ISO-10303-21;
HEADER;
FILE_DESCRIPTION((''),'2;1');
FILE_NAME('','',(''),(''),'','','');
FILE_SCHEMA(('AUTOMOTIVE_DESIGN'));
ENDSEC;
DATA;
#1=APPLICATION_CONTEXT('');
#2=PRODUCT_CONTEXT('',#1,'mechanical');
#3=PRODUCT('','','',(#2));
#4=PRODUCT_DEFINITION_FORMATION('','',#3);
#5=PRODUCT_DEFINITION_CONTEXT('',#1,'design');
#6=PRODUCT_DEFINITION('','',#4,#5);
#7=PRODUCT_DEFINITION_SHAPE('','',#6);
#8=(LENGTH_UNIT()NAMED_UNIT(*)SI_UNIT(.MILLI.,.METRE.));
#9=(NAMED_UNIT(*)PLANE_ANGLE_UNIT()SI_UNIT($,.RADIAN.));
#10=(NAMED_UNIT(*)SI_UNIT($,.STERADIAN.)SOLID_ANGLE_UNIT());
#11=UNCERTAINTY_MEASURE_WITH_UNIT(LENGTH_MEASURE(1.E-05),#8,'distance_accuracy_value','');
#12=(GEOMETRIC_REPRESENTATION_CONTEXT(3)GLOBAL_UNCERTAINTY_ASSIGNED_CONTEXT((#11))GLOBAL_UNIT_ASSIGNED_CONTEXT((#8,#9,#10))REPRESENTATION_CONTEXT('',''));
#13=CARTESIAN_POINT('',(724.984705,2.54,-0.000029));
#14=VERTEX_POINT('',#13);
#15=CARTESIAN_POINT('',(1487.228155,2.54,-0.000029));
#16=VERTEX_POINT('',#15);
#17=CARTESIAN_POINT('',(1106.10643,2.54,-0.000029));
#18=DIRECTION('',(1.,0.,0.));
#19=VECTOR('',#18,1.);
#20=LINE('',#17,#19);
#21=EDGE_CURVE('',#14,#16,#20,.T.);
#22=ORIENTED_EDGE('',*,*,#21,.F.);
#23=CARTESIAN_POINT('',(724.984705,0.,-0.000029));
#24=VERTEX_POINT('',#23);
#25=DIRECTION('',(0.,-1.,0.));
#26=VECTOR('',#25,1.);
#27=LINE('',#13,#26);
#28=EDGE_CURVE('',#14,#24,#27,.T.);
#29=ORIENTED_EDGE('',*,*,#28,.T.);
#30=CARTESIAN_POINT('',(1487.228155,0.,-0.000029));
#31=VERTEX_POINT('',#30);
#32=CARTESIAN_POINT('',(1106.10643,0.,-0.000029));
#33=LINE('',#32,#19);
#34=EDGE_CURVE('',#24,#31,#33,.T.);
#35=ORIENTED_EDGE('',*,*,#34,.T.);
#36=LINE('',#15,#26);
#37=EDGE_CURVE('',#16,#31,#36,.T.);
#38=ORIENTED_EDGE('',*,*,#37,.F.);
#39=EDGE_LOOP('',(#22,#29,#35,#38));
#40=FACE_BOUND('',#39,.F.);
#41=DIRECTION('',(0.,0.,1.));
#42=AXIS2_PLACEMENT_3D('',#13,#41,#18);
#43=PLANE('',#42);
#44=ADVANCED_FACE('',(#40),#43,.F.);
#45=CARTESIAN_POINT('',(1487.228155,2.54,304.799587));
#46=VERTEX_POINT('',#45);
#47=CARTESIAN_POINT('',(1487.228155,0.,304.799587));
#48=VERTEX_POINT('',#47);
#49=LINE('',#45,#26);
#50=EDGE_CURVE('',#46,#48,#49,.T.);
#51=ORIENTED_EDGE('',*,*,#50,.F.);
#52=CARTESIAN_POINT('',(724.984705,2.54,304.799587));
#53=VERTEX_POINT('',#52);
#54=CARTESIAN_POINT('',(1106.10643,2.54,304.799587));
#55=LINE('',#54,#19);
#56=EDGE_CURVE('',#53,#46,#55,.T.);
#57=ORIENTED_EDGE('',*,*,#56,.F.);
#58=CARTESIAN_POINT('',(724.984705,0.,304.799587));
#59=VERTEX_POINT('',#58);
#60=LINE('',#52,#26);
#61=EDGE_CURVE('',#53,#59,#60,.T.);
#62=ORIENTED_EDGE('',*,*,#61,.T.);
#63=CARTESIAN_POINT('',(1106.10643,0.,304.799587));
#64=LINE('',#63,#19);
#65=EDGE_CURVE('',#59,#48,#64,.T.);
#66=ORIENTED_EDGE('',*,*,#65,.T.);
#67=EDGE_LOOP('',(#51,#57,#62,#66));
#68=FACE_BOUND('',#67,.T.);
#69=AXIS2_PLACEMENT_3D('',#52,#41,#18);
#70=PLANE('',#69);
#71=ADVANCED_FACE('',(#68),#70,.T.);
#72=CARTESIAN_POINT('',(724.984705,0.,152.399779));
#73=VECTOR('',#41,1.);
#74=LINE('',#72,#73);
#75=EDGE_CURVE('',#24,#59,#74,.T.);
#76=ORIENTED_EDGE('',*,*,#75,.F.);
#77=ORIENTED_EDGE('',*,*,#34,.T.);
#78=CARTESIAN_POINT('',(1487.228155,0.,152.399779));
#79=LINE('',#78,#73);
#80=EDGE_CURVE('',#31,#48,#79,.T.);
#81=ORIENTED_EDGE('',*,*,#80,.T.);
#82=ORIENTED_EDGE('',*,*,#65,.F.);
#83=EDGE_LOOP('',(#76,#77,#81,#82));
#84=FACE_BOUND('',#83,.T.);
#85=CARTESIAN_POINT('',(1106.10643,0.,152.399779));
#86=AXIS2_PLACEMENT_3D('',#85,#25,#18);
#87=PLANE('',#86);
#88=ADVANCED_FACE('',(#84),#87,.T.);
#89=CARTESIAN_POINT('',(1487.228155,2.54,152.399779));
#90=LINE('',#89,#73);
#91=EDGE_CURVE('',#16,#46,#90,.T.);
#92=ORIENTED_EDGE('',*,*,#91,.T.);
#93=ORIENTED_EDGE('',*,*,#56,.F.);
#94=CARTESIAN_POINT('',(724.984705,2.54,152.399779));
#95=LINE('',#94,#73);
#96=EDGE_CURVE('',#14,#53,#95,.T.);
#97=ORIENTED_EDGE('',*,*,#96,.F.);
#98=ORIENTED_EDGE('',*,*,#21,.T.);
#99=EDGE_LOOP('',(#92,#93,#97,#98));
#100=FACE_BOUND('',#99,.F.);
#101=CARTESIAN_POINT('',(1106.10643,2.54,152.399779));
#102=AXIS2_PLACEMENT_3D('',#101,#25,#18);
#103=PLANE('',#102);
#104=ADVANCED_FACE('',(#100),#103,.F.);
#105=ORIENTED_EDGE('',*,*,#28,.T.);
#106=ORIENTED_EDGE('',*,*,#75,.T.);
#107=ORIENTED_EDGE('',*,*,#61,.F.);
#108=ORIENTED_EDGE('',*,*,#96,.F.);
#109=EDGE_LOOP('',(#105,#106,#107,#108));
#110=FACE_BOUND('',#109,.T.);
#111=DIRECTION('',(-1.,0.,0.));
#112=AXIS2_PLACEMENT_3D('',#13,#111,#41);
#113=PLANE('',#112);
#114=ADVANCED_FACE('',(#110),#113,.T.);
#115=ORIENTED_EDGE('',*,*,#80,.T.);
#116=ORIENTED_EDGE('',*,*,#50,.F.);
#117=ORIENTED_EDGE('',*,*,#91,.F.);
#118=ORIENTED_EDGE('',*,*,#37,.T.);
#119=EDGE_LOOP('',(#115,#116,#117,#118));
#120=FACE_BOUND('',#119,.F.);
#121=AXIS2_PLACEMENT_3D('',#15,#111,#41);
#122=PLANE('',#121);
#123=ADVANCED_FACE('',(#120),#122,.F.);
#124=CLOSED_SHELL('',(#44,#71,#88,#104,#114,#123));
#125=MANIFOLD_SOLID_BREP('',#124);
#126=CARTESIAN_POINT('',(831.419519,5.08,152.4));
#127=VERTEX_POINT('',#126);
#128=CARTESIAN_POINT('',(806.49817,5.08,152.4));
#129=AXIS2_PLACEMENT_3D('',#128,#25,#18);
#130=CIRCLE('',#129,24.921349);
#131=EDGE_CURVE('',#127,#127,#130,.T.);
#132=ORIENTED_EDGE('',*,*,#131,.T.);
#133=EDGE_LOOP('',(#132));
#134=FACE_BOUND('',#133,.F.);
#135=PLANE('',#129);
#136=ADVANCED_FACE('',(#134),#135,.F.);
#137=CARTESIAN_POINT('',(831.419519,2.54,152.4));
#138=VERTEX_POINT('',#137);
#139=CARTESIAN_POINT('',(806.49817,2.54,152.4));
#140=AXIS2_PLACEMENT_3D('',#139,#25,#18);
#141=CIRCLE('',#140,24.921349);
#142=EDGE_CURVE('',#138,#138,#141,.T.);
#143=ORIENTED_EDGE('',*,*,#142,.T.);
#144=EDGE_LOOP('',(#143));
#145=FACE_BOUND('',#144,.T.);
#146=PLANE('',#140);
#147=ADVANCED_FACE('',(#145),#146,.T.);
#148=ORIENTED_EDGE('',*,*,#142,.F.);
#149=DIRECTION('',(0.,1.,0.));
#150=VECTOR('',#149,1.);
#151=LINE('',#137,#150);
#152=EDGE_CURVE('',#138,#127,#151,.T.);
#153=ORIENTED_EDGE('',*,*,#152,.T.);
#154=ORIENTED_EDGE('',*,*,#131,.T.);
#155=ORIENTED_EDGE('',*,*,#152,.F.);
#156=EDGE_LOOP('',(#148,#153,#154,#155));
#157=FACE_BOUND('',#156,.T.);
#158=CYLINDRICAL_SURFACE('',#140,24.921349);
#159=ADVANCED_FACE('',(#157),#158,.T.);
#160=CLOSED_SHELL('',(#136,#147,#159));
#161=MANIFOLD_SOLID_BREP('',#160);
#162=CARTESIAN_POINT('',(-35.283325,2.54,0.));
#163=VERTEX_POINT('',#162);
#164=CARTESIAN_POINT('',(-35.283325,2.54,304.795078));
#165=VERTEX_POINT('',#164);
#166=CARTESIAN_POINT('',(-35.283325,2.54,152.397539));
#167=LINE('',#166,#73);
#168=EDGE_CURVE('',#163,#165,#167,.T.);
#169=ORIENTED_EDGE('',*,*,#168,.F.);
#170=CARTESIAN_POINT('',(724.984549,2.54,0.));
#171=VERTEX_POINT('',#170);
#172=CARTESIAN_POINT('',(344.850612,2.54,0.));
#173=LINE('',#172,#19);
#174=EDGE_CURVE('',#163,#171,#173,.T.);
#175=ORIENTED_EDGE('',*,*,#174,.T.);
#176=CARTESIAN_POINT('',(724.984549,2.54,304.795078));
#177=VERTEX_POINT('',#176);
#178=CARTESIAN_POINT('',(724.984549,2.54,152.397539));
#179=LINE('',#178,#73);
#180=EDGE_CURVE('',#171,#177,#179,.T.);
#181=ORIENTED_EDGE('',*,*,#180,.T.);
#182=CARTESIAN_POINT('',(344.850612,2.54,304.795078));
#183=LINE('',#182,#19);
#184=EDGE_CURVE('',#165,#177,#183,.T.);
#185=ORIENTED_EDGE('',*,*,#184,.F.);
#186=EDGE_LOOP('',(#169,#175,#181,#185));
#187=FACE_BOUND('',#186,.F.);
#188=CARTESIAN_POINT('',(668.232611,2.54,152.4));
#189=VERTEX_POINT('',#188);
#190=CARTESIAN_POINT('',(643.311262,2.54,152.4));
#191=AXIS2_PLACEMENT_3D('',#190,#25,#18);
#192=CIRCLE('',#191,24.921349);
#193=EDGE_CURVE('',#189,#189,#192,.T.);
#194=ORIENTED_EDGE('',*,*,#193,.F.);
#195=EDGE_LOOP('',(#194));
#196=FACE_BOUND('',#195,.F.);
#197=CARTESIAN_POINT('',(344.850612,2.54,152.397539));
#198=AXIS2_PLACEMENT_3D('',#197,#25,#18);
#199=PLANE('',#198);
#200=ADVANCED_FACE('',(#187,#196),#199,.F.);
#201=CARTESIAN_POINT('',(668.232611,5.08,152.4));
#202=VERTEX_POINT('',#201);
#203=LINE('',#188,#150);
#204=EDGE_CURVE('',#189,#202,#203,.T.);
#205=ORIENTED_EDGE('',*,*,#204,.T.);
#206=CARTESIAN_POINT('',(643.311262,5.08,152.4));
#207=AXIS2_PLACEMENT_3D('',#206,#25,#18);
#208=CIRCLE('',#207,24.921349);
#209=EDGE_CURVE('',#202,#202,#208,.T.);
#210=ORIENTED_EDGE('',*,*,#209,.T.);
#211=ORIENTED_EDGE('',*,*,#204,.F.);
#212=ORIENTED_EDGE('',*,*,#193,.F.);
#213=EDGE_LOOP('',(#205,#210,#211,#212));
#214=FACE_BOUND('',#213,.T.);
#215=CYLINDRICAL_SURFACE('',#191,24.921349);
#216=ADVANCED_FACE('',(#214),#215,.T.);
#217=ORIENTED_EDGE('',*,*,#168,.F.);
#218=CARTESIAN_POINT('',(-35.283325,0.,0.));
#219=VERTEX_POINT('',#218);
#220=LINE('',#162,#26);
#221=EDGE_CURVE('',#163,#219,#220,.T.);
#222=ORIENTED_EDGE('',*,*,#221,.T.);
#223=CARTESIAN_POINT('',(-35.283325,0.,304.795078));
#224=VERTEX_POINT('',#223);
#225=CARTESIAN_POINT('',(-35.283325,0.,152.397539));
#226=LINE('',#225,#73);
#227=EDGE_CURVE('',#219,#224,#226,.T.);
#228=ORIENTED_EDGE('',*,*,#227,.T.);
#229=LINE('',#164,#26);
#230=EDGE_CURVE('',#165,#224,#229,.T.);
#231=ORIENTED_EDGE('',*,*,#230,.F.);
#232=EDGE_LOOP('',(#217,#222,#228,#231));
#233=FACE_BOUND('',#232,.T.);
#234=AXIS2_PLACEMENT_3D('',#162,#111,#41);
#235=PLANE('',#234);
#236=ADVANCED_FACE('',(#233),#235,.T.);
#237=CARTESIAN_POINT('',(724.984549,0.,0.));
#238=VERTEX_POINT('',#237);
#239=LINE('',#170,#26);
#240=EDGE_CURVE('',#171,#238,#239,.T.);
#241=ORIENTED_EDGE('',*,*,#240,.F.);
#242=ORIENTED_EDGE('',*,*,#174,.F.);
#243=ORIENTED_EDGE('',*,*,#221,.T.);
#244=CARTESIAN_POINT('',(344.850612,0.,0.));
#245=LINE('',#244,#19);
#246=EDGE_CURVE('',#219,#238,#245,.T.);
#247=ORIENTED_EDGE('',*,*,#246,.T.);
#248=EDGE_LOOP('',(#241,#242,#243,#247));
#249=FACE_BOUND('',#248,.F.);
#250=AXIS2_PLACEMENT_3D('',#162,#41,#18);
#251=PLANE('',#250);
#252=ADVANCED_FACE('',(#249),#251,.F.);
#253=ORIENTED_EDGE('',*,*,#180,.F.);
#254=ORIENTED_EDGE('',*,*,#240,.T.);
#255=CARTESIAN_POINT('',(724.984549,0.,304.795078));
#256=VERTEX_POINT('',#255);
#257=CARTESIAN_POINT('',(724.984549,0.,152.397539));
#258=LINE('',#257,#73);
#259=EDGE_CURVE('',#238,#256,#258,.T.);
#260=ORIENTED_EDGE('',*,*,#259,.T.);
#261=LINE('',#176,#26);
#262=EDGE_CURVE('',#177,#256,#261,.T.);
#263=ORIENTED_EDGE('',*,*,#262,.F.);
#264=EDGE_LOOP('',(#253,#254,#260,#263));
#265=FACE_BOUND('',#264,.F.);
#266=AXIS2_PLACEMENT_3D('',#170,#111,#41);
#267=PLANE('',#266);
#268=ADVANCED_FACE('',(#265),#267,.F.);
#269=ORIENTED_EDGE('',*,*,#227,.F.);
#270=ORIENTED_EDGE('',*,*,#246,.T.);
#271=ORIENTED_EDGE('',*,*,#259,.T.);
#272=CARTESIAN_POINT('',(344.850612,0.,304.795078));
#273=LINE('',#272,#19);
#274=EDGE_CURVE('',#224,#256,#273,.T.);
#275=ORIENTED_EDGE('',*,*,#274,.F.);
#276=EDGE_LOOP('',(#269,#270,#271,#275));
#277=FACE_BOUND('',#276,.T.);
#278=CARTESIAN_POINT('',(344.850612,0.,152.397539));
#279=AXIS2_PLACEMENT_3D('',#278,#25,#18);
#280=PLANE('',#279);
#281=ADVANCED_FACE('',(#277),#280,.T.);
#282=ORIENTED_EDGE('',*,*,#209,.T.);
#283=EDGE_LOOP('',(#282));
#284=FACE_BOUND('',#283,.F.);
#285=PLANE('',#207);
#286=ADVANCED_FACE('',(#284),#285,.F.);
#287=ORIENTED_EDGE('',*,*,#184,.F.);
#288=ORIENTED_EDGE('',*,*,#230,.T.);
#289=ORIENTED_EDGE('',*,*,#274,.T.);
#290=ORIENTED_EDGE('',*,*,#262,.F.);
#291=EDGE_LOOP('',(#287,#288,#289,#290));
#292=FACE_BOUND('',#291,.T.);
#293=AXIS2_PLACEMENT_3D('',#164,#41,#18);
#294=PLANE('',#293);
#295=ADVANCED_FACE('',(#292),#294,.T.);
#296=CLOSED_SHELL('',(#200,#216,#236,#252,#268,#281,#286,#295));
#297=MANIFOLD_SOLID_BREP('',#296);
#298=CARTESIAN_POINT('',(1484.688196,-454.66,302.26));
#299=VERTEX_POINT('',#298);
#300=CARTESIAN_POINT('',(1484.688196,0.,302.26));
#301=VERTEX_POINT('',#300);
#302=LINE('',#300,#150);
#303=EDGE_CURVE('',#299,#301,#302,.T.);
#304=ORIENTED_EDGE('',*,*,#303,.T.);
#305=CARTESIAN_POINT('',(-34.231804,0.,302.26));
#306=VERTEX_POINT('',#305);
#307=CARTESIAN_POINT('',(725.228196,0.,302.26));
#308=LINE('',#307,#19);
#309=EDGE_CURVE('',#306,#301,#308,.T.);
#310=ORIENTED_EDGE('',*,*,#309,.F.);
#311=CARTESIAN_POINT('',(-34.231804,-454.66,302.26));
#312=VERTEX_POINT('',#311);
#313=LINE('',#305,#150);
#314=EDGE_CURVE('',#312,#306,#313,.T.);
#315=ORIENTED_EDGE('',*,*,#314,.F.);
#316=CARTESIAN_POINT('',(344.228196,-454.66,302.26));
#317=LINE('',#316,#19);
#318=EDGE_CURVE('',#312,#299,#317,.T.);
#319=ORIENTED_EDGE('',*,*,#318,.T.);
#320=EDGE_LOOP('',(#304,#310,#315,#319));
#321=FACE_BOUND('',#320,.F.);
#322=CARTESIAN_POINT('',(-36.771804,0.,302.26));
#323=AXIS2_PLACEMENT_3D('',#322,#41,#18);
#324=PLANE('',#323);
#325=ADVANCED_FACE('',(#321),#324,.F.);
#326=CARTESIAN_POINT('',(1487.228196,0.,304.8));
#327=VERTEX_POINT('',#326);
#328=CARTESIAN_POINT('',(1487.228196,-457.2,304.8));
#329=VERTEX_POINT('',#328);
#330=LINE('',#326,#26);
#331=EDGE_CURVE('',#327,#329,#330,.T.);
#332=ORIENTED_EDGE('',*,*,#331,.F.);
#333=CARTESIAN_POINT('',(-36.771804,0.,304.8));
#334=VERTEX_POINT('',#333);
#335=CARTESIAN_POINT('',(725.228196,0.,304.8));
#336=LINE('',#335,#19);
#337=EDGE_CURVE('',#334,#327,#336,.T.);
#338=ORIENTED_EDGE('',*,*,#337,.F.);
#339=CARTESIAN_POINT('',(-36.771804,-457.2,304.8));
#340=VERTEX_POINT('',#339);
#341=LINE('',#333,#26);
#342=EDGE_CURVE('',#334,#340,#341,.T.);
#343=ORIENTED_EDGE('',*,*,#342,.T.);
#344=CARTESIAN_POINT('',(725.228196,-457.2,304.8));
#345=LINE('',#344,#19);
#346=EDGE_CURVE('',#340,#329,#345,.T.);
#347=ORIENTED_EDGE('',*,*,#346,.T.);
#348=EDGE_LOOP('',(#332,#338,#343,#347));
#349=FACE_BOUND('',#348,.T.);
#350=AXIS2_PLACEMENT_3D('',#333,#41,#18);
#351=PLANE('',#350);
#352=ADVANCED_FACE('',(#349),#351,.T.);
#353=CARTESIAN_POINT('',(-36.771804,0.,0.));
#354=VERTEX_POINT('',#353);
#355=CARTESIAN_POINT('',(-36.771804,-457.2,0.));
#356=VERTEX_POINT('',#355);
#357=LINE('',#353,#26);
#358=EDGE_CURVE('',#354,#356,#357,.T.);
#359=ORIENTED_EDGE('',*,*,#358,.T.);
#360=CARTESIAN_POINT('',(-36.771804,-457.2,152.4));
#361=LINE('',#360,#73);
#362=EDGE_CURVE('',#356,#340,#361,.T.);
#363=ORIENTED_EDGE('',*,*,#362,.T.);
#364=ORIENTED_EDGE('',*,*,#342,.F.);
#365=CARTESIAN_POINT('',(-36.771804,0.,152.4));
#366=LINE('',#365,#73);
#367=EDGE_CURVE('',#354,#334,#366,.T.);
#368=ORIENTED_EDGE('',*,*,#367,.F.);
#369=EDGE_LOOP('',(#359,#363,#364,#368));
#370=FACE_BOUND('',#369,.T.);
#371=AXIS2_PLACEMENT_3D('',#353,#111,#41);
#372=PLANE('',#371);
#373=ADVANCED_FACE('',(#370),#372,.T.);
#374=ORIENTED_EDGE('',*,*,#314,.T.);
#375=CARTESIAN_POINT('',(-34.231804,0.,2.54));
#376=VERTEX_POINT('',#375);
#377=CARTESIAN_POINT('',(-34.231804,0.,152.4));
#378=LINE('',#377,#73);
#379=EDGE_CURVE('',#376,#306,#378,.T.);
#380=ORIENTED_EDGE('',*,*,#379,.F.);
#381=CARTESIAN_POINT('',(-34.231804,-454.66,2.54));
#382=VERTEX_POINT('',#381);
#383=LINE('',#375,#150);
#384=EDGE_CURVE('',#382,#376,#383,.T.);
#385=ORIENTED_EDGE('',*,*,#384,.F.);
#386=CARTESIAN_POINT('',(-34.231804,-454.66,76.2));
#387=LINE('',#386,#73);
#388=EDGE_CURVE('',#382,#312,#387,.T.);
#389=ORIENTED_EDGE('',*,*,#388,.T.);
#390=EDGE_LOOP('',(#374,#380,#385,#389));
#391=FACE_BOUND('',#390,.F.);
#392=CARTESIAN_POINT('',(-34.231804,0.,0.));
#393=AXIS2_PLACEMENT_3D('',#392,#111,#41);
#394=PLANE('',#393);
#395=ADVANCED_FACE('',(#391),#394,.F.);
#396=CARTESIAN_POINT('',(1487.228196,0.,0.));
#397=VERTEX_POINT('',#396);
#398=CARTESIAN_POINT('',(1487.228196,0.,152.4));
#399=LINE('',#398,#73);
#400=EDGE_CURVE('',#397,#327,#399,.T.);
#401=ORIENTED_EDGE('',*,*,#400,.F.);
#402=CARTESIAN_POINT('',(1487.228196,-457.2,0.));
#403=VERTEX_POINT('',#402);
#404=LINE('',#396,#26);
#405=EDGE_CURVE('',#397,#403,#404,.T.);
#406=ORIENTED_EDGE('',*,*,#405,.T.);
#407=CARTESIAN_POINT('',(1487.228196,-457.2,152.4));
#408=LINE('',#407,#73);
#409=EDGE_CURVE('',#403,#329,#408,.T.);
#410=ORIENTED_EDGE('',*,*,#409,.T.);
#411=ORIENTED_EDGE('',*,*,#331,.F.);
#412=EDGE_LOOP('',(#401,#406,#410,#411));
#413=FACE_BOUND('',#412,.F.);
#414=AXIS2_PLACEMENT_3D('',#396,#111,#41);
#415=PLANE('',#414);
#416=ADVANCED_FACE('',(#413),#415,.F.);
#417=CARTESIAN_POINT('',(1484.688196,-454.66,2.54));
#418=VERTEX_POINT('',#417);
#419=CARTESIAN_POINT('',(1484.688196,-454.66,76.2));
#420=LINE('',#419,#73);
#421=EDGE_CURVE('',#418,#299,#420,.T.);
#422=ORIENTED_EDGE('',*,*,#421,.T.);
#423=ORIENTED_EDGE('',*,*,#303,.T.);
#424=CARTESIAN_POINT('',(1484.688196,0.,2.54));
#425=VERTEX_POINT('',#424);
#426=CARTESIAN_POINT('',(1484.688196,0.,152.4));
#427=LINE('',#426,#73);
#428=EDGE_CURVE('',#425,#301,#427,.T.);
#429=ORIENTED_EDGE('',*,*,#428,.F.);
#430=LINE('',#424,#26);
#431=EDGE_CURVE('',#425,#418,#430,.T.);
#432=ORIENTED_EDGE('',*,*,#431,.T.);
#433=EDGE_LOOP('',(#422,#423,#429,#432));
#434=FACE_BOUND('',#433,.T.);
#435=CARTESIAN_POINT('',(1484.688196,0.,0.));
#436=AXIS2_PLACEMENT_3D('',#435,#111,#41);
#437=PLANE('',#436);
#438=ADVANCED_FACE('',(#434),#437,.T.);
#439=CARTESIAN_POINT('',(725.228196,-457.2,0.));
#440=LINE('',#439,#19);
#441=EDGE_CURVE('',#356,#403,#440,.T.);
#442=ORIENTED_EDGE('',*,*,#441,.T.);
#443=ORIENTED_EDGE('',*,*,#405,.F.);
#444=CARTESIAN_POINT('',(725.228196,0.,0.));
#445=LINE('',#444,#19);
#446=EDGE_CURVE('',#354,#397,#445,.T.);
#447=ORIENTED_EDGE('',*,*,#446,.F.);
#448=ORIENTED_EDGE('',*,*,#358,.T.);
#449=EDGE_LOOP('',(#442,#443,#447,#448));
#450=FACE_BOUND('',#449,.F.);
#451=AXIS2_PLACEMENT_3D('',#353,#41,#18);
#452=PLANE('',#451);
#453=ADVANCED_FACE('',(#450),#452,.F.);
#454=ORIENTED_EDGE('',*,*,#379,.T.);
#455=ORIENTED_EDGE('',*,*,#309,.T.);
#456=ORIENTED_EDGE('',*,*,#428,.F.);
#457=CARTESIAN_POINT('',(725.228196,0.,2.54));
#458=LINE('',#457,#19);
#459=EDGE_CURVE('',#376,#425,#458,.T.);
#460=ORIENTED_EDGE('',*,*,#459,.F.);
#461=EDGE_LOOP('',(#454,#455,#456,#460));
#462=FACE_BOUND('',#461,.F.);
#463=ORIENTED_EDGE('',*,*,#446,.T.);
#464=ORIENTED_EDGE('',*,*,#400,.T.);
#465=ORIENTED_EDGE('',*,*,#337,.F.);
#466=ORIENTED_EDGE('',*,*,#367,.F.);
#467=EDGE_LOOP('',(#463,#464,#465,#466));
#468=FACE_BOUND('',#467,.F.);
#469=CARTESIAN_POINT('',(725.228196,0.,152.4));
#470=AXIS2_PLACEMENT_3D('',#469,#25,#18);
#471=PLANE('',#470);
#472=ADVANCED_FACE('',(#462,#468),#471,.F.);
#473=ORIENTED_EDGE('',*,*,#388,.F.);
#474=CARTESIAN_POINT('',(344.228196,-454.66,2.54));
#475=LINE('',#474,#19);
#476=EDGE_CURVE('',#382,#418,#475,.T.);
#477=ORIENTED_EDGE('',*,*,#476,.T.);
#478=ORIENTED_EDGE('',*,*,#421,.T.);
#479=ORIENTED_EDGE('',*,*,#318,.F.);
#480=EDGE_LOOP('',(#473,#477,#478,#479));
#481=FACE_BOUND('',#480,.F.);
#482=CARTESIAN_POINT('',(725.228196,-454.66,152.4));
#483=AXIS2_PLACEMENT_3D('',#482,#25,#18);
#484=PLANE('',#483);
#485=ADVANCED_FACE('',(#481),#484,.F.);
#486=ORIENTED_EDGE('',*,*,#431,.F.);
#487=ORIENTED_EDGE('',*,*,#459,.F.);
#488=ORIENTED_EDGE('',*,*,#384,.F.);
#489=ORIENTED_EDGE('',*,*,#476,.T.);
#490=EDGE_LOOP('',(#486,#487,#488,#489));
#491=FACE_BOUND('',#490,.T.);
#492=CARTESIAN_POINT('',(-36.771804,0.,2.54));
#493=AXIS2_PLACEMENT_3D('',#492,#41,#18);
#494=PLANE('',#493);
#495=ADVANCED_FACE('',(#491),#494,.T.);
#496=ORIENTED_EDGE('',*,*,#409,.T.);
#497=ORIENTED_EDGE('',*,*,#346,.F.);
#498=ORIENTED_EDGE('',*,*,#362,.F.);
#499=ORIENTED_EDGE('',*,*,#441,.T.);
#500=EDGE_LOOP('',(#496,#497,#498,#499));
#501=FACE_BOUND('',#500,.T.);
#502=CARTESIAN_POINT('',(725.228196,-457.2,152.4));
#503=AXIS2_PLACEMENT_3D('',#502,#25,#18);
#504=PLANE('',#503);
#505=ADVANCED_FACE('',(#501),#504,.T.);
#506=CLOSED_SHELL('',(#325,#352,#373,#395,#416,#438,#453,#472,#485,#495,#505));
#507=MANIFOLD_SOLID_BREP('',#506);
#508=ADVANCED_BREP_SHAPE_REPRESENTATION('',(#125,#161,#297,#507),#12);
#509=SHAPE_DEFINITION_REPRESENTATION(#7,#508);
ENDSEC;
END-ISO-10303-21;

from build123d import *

# Parameters (mm, degrees)
F0_W     = 1524
F0_H     = 304.8
F1_DEPTH = 457.2
F2_T     = -2.54
F4_W     = 760.2678739185
F4_H     = 304.7950782727
F5_DEPTH = 2.54
F6_R     = 24.9213487402
F7_DEPTH = 2.54
F8_W     = 762.243449688
F8_H     = 304.7996152788
F9_DEPTH = 2.54


with BuildPart() as f1:
    # F0 (on Front) → F1 (new body)
    with BuildSketch(Plane.XZ):
        with Locations((725.2281959057, 152.4)):
            Rectangle(F0_W, F0_H)
    extrude(amount=F1_DEPTH)

    # F2
    f2_openings = [f1.faces().sort_by_distance(p)[0] for p in [
        (725.228196, 0, 152.4),
    ]]
    offset(amount=F2_T, openings=f2_openings)


with BuildPart() as f5:
    # F4 (on offset) → F5 (new body)
    with BuildSketch(Plane.XZ.offset(-2.54)):
        with Locations((344.8506124159, 152.3975391363)):
            Rectangle(F4_W, F4_H)
    extrude(amount=F5_DEPTH)

    # F6 (on offset) → F7, piece 2 (join)
    with BuildSketch(Plane.XZ.offset(-2.54)):
        with Locations((643.3112621307, 152.4)):
            Circle(F6_R)
    extrude(amount=-F7_DEPTH)


with BuildPart() as f7:
    # F6 (on offset) → F7 (new body)
    with BuildSketch(Plane.XZ.offset(-2.54)):
        with Locations((806.498169899, 152.4)):
            Circle(F6_R)
    extrude(amount=-F7_DEPTH)


with BuildPart() as f9:
    # F8 (on offset) → F9 (new body)
    with BuildSketch(Plane.XZ.offset(-2.54)):
        with Locations((1106.1064302921, 152.3997788951)):
            Rectangle(F8_W, F8_H)
    extrude(amount=F9_DEPTH)


solid = Compound([f1.part, f5.part, f7.part, f9.part])
